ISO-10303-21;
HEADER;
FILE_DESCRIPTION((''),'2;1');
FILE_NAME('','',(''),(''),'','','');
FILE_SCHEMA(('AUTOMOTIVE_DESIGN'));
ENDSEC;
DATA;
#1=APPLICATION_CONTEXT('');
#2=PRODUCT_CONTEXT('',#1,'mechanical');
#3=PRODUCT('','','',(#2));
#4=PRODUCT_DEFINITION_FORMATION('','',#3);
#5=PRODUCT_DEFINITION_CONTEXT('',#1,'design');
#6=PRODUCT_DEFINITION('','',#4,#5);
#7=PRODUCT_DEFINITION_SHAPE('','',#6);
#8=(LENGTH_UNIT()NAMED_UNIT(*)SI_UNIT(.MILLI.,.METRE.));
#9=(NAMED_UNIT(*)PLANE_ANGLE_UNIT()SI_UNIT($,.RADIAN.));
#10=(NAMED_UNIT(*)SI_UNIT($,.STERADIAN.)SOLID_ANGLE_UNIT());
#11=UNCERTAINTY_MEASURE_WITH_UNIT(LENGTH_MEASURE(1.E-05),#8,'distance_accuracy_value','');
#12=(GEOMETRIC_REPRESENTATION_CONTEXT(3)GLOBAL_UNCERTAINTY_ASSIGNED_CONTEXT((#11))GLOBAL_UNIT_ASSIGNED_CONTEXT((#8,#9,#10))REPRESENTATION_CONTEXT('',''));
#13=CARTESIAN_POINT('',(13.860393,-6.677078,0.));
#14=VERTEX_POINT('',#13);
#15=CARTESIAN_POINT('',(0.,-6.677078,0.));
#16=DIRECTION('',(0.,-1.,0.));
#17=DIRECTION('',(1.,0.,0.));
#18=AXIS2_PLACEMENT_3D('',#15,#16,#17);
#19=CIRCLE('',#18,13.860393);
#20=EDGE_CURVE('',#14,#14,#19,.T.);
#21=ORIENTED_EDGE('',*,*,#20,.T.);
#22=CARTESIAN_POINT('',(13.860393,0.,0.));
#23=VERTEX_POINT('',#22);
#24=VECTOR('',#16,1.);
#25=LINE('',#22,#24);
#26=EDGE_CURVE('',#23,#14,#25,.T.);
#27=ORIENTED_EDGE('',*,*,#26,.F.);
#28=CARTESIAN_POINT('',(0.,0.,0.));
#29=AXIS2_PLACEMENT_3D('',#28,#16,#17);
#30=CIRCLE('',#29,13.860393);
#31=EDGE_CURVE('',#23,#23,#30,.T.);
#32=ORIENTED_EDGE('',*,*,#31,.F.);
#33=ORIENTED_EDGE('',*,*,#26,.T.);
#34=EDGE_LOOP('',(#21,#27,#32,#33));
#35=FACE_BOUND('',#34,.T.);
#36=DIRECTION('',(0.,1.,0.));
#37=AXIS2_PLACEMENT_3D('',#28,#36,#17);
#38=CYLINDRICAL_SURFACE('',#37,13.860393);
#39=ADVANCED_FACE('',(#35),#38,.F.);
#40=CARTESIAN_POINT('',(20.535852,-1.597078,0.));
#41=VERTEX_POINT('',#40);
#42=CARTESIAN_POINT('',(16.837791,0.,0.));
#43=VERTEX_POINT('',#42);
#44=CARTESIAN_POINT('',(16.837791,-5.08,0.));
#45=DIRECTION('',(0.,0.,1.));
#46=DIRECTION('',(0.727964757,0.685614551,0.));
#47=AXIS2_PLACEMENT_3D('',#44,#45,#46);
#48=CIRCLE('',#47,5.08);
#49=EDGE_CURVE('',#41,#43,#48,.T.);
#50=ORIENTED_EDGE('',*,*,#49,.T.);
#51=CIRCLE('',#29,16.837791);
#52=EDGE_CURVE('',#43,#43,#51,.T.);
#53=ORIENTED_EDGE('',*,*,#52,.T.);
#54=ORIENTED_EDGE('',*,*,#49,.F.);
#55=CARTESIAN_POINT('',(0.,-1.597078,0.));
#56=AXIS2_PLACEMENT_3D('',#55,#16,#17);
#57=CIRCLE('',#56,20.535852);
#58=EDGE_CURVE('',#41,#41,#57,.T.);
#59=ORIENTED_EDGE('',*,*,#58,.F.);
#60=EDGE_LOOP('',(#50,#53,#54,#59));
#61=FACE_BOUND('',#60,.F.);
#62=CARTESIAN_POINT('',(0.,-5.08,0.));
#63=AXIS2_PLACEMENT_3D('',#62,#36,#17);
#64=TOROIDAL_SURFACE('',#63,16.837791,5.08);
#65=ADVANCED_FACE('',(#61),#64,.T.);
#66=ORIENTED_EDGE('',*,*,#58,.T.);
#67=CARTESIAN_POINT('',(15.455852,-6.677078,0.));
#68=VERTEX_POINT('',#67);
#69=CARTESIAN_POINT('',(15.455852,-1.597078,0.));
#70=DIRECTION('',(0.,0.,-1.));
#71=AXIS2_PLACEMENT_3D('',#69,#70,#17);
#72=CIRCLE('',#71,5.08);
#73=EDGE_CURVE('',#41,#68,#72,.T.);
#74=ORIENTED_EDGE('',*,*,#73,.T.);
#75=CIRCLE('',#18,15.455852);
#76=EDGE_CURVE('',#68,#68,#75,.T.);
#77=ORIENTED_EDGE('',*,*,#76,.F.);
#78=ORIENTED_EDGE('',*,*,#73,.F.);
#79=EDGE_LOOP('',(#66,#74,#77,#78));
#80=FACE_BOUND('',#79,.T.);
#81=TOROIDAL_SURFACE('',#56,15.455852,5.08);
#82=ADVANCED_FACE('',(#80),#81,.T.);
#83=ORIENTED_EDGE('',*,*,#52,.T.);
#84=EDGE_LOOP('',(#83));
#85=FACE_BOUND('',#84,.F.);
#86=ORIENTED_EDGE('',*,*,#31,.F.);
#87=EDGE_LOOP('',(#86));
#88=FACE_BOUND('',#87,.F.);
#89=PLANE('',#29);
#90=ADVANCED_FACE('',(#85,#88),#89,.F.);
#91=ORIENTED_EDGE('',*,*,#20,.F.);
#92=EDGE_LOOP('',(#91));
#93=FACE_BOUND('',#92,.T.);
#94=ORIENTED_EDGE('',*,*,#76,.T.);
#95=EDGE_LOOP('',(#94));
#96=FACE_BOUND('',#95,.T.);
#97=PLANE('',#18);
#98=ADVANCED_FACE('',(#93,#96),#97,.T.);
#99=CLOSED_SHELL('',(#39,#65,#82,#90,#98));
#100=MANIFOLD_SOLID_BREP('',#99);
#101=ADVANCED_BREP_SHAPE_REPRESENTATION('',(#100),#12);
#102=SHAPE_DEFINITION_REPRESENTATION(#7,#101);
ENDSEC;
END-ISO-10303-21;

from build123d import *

# Parameters (mm, degrees)
F2_R     = 20.5358515241
F2_R_2   = 13.8603934158
F0_DEPTH = 6.6770780832
F3_R     = 5.08


# Not quite as in the source:
# - a fillet or chamfer that OpenCascade refuses, or shapes differently, is made with other operations: its cross-section is extruded or revolved along the edge and cut away or added


with BuildPart() as f0:
    # F2 (on Front) → F0 (new body)
    with BuildSketch(Plane.XZ):
        Circle(F2_R)
        Circle(F2_R_2, mode=Mode.SUBTRACT)
    extrude(amount=F0_DEPTH)

    # F3
    f3_edges = [f0.edges().sort_by_distance(p)[0] for p in [
        (-20.535852, -6.677078, 0),
    ]]
    fillet(f3_edges, radius=F3_R)

    # F1: fillet of radius 5.08 on 1 edges, made by hand

    # F1_s1 → F1_t2 (revolve, cut)
    with BuildSketch(Plane.XY):
        with BuildLine():
            ThreePointArc((20.5358515241, -1.5970780832), (18.8518854725, -0.4163295926), (16.8377905564, 0))
            Line((16.8377905564, 0), (20.5358515241, 0))
            Line((20.5358515241, 0), (20.5358515241, -1.5970780832))
        make_face()
    revolve(axis=Axis((0, 0, 0), (0, -1, 0)), mode=Mode.SUBTRACT)


solid = f0.part
